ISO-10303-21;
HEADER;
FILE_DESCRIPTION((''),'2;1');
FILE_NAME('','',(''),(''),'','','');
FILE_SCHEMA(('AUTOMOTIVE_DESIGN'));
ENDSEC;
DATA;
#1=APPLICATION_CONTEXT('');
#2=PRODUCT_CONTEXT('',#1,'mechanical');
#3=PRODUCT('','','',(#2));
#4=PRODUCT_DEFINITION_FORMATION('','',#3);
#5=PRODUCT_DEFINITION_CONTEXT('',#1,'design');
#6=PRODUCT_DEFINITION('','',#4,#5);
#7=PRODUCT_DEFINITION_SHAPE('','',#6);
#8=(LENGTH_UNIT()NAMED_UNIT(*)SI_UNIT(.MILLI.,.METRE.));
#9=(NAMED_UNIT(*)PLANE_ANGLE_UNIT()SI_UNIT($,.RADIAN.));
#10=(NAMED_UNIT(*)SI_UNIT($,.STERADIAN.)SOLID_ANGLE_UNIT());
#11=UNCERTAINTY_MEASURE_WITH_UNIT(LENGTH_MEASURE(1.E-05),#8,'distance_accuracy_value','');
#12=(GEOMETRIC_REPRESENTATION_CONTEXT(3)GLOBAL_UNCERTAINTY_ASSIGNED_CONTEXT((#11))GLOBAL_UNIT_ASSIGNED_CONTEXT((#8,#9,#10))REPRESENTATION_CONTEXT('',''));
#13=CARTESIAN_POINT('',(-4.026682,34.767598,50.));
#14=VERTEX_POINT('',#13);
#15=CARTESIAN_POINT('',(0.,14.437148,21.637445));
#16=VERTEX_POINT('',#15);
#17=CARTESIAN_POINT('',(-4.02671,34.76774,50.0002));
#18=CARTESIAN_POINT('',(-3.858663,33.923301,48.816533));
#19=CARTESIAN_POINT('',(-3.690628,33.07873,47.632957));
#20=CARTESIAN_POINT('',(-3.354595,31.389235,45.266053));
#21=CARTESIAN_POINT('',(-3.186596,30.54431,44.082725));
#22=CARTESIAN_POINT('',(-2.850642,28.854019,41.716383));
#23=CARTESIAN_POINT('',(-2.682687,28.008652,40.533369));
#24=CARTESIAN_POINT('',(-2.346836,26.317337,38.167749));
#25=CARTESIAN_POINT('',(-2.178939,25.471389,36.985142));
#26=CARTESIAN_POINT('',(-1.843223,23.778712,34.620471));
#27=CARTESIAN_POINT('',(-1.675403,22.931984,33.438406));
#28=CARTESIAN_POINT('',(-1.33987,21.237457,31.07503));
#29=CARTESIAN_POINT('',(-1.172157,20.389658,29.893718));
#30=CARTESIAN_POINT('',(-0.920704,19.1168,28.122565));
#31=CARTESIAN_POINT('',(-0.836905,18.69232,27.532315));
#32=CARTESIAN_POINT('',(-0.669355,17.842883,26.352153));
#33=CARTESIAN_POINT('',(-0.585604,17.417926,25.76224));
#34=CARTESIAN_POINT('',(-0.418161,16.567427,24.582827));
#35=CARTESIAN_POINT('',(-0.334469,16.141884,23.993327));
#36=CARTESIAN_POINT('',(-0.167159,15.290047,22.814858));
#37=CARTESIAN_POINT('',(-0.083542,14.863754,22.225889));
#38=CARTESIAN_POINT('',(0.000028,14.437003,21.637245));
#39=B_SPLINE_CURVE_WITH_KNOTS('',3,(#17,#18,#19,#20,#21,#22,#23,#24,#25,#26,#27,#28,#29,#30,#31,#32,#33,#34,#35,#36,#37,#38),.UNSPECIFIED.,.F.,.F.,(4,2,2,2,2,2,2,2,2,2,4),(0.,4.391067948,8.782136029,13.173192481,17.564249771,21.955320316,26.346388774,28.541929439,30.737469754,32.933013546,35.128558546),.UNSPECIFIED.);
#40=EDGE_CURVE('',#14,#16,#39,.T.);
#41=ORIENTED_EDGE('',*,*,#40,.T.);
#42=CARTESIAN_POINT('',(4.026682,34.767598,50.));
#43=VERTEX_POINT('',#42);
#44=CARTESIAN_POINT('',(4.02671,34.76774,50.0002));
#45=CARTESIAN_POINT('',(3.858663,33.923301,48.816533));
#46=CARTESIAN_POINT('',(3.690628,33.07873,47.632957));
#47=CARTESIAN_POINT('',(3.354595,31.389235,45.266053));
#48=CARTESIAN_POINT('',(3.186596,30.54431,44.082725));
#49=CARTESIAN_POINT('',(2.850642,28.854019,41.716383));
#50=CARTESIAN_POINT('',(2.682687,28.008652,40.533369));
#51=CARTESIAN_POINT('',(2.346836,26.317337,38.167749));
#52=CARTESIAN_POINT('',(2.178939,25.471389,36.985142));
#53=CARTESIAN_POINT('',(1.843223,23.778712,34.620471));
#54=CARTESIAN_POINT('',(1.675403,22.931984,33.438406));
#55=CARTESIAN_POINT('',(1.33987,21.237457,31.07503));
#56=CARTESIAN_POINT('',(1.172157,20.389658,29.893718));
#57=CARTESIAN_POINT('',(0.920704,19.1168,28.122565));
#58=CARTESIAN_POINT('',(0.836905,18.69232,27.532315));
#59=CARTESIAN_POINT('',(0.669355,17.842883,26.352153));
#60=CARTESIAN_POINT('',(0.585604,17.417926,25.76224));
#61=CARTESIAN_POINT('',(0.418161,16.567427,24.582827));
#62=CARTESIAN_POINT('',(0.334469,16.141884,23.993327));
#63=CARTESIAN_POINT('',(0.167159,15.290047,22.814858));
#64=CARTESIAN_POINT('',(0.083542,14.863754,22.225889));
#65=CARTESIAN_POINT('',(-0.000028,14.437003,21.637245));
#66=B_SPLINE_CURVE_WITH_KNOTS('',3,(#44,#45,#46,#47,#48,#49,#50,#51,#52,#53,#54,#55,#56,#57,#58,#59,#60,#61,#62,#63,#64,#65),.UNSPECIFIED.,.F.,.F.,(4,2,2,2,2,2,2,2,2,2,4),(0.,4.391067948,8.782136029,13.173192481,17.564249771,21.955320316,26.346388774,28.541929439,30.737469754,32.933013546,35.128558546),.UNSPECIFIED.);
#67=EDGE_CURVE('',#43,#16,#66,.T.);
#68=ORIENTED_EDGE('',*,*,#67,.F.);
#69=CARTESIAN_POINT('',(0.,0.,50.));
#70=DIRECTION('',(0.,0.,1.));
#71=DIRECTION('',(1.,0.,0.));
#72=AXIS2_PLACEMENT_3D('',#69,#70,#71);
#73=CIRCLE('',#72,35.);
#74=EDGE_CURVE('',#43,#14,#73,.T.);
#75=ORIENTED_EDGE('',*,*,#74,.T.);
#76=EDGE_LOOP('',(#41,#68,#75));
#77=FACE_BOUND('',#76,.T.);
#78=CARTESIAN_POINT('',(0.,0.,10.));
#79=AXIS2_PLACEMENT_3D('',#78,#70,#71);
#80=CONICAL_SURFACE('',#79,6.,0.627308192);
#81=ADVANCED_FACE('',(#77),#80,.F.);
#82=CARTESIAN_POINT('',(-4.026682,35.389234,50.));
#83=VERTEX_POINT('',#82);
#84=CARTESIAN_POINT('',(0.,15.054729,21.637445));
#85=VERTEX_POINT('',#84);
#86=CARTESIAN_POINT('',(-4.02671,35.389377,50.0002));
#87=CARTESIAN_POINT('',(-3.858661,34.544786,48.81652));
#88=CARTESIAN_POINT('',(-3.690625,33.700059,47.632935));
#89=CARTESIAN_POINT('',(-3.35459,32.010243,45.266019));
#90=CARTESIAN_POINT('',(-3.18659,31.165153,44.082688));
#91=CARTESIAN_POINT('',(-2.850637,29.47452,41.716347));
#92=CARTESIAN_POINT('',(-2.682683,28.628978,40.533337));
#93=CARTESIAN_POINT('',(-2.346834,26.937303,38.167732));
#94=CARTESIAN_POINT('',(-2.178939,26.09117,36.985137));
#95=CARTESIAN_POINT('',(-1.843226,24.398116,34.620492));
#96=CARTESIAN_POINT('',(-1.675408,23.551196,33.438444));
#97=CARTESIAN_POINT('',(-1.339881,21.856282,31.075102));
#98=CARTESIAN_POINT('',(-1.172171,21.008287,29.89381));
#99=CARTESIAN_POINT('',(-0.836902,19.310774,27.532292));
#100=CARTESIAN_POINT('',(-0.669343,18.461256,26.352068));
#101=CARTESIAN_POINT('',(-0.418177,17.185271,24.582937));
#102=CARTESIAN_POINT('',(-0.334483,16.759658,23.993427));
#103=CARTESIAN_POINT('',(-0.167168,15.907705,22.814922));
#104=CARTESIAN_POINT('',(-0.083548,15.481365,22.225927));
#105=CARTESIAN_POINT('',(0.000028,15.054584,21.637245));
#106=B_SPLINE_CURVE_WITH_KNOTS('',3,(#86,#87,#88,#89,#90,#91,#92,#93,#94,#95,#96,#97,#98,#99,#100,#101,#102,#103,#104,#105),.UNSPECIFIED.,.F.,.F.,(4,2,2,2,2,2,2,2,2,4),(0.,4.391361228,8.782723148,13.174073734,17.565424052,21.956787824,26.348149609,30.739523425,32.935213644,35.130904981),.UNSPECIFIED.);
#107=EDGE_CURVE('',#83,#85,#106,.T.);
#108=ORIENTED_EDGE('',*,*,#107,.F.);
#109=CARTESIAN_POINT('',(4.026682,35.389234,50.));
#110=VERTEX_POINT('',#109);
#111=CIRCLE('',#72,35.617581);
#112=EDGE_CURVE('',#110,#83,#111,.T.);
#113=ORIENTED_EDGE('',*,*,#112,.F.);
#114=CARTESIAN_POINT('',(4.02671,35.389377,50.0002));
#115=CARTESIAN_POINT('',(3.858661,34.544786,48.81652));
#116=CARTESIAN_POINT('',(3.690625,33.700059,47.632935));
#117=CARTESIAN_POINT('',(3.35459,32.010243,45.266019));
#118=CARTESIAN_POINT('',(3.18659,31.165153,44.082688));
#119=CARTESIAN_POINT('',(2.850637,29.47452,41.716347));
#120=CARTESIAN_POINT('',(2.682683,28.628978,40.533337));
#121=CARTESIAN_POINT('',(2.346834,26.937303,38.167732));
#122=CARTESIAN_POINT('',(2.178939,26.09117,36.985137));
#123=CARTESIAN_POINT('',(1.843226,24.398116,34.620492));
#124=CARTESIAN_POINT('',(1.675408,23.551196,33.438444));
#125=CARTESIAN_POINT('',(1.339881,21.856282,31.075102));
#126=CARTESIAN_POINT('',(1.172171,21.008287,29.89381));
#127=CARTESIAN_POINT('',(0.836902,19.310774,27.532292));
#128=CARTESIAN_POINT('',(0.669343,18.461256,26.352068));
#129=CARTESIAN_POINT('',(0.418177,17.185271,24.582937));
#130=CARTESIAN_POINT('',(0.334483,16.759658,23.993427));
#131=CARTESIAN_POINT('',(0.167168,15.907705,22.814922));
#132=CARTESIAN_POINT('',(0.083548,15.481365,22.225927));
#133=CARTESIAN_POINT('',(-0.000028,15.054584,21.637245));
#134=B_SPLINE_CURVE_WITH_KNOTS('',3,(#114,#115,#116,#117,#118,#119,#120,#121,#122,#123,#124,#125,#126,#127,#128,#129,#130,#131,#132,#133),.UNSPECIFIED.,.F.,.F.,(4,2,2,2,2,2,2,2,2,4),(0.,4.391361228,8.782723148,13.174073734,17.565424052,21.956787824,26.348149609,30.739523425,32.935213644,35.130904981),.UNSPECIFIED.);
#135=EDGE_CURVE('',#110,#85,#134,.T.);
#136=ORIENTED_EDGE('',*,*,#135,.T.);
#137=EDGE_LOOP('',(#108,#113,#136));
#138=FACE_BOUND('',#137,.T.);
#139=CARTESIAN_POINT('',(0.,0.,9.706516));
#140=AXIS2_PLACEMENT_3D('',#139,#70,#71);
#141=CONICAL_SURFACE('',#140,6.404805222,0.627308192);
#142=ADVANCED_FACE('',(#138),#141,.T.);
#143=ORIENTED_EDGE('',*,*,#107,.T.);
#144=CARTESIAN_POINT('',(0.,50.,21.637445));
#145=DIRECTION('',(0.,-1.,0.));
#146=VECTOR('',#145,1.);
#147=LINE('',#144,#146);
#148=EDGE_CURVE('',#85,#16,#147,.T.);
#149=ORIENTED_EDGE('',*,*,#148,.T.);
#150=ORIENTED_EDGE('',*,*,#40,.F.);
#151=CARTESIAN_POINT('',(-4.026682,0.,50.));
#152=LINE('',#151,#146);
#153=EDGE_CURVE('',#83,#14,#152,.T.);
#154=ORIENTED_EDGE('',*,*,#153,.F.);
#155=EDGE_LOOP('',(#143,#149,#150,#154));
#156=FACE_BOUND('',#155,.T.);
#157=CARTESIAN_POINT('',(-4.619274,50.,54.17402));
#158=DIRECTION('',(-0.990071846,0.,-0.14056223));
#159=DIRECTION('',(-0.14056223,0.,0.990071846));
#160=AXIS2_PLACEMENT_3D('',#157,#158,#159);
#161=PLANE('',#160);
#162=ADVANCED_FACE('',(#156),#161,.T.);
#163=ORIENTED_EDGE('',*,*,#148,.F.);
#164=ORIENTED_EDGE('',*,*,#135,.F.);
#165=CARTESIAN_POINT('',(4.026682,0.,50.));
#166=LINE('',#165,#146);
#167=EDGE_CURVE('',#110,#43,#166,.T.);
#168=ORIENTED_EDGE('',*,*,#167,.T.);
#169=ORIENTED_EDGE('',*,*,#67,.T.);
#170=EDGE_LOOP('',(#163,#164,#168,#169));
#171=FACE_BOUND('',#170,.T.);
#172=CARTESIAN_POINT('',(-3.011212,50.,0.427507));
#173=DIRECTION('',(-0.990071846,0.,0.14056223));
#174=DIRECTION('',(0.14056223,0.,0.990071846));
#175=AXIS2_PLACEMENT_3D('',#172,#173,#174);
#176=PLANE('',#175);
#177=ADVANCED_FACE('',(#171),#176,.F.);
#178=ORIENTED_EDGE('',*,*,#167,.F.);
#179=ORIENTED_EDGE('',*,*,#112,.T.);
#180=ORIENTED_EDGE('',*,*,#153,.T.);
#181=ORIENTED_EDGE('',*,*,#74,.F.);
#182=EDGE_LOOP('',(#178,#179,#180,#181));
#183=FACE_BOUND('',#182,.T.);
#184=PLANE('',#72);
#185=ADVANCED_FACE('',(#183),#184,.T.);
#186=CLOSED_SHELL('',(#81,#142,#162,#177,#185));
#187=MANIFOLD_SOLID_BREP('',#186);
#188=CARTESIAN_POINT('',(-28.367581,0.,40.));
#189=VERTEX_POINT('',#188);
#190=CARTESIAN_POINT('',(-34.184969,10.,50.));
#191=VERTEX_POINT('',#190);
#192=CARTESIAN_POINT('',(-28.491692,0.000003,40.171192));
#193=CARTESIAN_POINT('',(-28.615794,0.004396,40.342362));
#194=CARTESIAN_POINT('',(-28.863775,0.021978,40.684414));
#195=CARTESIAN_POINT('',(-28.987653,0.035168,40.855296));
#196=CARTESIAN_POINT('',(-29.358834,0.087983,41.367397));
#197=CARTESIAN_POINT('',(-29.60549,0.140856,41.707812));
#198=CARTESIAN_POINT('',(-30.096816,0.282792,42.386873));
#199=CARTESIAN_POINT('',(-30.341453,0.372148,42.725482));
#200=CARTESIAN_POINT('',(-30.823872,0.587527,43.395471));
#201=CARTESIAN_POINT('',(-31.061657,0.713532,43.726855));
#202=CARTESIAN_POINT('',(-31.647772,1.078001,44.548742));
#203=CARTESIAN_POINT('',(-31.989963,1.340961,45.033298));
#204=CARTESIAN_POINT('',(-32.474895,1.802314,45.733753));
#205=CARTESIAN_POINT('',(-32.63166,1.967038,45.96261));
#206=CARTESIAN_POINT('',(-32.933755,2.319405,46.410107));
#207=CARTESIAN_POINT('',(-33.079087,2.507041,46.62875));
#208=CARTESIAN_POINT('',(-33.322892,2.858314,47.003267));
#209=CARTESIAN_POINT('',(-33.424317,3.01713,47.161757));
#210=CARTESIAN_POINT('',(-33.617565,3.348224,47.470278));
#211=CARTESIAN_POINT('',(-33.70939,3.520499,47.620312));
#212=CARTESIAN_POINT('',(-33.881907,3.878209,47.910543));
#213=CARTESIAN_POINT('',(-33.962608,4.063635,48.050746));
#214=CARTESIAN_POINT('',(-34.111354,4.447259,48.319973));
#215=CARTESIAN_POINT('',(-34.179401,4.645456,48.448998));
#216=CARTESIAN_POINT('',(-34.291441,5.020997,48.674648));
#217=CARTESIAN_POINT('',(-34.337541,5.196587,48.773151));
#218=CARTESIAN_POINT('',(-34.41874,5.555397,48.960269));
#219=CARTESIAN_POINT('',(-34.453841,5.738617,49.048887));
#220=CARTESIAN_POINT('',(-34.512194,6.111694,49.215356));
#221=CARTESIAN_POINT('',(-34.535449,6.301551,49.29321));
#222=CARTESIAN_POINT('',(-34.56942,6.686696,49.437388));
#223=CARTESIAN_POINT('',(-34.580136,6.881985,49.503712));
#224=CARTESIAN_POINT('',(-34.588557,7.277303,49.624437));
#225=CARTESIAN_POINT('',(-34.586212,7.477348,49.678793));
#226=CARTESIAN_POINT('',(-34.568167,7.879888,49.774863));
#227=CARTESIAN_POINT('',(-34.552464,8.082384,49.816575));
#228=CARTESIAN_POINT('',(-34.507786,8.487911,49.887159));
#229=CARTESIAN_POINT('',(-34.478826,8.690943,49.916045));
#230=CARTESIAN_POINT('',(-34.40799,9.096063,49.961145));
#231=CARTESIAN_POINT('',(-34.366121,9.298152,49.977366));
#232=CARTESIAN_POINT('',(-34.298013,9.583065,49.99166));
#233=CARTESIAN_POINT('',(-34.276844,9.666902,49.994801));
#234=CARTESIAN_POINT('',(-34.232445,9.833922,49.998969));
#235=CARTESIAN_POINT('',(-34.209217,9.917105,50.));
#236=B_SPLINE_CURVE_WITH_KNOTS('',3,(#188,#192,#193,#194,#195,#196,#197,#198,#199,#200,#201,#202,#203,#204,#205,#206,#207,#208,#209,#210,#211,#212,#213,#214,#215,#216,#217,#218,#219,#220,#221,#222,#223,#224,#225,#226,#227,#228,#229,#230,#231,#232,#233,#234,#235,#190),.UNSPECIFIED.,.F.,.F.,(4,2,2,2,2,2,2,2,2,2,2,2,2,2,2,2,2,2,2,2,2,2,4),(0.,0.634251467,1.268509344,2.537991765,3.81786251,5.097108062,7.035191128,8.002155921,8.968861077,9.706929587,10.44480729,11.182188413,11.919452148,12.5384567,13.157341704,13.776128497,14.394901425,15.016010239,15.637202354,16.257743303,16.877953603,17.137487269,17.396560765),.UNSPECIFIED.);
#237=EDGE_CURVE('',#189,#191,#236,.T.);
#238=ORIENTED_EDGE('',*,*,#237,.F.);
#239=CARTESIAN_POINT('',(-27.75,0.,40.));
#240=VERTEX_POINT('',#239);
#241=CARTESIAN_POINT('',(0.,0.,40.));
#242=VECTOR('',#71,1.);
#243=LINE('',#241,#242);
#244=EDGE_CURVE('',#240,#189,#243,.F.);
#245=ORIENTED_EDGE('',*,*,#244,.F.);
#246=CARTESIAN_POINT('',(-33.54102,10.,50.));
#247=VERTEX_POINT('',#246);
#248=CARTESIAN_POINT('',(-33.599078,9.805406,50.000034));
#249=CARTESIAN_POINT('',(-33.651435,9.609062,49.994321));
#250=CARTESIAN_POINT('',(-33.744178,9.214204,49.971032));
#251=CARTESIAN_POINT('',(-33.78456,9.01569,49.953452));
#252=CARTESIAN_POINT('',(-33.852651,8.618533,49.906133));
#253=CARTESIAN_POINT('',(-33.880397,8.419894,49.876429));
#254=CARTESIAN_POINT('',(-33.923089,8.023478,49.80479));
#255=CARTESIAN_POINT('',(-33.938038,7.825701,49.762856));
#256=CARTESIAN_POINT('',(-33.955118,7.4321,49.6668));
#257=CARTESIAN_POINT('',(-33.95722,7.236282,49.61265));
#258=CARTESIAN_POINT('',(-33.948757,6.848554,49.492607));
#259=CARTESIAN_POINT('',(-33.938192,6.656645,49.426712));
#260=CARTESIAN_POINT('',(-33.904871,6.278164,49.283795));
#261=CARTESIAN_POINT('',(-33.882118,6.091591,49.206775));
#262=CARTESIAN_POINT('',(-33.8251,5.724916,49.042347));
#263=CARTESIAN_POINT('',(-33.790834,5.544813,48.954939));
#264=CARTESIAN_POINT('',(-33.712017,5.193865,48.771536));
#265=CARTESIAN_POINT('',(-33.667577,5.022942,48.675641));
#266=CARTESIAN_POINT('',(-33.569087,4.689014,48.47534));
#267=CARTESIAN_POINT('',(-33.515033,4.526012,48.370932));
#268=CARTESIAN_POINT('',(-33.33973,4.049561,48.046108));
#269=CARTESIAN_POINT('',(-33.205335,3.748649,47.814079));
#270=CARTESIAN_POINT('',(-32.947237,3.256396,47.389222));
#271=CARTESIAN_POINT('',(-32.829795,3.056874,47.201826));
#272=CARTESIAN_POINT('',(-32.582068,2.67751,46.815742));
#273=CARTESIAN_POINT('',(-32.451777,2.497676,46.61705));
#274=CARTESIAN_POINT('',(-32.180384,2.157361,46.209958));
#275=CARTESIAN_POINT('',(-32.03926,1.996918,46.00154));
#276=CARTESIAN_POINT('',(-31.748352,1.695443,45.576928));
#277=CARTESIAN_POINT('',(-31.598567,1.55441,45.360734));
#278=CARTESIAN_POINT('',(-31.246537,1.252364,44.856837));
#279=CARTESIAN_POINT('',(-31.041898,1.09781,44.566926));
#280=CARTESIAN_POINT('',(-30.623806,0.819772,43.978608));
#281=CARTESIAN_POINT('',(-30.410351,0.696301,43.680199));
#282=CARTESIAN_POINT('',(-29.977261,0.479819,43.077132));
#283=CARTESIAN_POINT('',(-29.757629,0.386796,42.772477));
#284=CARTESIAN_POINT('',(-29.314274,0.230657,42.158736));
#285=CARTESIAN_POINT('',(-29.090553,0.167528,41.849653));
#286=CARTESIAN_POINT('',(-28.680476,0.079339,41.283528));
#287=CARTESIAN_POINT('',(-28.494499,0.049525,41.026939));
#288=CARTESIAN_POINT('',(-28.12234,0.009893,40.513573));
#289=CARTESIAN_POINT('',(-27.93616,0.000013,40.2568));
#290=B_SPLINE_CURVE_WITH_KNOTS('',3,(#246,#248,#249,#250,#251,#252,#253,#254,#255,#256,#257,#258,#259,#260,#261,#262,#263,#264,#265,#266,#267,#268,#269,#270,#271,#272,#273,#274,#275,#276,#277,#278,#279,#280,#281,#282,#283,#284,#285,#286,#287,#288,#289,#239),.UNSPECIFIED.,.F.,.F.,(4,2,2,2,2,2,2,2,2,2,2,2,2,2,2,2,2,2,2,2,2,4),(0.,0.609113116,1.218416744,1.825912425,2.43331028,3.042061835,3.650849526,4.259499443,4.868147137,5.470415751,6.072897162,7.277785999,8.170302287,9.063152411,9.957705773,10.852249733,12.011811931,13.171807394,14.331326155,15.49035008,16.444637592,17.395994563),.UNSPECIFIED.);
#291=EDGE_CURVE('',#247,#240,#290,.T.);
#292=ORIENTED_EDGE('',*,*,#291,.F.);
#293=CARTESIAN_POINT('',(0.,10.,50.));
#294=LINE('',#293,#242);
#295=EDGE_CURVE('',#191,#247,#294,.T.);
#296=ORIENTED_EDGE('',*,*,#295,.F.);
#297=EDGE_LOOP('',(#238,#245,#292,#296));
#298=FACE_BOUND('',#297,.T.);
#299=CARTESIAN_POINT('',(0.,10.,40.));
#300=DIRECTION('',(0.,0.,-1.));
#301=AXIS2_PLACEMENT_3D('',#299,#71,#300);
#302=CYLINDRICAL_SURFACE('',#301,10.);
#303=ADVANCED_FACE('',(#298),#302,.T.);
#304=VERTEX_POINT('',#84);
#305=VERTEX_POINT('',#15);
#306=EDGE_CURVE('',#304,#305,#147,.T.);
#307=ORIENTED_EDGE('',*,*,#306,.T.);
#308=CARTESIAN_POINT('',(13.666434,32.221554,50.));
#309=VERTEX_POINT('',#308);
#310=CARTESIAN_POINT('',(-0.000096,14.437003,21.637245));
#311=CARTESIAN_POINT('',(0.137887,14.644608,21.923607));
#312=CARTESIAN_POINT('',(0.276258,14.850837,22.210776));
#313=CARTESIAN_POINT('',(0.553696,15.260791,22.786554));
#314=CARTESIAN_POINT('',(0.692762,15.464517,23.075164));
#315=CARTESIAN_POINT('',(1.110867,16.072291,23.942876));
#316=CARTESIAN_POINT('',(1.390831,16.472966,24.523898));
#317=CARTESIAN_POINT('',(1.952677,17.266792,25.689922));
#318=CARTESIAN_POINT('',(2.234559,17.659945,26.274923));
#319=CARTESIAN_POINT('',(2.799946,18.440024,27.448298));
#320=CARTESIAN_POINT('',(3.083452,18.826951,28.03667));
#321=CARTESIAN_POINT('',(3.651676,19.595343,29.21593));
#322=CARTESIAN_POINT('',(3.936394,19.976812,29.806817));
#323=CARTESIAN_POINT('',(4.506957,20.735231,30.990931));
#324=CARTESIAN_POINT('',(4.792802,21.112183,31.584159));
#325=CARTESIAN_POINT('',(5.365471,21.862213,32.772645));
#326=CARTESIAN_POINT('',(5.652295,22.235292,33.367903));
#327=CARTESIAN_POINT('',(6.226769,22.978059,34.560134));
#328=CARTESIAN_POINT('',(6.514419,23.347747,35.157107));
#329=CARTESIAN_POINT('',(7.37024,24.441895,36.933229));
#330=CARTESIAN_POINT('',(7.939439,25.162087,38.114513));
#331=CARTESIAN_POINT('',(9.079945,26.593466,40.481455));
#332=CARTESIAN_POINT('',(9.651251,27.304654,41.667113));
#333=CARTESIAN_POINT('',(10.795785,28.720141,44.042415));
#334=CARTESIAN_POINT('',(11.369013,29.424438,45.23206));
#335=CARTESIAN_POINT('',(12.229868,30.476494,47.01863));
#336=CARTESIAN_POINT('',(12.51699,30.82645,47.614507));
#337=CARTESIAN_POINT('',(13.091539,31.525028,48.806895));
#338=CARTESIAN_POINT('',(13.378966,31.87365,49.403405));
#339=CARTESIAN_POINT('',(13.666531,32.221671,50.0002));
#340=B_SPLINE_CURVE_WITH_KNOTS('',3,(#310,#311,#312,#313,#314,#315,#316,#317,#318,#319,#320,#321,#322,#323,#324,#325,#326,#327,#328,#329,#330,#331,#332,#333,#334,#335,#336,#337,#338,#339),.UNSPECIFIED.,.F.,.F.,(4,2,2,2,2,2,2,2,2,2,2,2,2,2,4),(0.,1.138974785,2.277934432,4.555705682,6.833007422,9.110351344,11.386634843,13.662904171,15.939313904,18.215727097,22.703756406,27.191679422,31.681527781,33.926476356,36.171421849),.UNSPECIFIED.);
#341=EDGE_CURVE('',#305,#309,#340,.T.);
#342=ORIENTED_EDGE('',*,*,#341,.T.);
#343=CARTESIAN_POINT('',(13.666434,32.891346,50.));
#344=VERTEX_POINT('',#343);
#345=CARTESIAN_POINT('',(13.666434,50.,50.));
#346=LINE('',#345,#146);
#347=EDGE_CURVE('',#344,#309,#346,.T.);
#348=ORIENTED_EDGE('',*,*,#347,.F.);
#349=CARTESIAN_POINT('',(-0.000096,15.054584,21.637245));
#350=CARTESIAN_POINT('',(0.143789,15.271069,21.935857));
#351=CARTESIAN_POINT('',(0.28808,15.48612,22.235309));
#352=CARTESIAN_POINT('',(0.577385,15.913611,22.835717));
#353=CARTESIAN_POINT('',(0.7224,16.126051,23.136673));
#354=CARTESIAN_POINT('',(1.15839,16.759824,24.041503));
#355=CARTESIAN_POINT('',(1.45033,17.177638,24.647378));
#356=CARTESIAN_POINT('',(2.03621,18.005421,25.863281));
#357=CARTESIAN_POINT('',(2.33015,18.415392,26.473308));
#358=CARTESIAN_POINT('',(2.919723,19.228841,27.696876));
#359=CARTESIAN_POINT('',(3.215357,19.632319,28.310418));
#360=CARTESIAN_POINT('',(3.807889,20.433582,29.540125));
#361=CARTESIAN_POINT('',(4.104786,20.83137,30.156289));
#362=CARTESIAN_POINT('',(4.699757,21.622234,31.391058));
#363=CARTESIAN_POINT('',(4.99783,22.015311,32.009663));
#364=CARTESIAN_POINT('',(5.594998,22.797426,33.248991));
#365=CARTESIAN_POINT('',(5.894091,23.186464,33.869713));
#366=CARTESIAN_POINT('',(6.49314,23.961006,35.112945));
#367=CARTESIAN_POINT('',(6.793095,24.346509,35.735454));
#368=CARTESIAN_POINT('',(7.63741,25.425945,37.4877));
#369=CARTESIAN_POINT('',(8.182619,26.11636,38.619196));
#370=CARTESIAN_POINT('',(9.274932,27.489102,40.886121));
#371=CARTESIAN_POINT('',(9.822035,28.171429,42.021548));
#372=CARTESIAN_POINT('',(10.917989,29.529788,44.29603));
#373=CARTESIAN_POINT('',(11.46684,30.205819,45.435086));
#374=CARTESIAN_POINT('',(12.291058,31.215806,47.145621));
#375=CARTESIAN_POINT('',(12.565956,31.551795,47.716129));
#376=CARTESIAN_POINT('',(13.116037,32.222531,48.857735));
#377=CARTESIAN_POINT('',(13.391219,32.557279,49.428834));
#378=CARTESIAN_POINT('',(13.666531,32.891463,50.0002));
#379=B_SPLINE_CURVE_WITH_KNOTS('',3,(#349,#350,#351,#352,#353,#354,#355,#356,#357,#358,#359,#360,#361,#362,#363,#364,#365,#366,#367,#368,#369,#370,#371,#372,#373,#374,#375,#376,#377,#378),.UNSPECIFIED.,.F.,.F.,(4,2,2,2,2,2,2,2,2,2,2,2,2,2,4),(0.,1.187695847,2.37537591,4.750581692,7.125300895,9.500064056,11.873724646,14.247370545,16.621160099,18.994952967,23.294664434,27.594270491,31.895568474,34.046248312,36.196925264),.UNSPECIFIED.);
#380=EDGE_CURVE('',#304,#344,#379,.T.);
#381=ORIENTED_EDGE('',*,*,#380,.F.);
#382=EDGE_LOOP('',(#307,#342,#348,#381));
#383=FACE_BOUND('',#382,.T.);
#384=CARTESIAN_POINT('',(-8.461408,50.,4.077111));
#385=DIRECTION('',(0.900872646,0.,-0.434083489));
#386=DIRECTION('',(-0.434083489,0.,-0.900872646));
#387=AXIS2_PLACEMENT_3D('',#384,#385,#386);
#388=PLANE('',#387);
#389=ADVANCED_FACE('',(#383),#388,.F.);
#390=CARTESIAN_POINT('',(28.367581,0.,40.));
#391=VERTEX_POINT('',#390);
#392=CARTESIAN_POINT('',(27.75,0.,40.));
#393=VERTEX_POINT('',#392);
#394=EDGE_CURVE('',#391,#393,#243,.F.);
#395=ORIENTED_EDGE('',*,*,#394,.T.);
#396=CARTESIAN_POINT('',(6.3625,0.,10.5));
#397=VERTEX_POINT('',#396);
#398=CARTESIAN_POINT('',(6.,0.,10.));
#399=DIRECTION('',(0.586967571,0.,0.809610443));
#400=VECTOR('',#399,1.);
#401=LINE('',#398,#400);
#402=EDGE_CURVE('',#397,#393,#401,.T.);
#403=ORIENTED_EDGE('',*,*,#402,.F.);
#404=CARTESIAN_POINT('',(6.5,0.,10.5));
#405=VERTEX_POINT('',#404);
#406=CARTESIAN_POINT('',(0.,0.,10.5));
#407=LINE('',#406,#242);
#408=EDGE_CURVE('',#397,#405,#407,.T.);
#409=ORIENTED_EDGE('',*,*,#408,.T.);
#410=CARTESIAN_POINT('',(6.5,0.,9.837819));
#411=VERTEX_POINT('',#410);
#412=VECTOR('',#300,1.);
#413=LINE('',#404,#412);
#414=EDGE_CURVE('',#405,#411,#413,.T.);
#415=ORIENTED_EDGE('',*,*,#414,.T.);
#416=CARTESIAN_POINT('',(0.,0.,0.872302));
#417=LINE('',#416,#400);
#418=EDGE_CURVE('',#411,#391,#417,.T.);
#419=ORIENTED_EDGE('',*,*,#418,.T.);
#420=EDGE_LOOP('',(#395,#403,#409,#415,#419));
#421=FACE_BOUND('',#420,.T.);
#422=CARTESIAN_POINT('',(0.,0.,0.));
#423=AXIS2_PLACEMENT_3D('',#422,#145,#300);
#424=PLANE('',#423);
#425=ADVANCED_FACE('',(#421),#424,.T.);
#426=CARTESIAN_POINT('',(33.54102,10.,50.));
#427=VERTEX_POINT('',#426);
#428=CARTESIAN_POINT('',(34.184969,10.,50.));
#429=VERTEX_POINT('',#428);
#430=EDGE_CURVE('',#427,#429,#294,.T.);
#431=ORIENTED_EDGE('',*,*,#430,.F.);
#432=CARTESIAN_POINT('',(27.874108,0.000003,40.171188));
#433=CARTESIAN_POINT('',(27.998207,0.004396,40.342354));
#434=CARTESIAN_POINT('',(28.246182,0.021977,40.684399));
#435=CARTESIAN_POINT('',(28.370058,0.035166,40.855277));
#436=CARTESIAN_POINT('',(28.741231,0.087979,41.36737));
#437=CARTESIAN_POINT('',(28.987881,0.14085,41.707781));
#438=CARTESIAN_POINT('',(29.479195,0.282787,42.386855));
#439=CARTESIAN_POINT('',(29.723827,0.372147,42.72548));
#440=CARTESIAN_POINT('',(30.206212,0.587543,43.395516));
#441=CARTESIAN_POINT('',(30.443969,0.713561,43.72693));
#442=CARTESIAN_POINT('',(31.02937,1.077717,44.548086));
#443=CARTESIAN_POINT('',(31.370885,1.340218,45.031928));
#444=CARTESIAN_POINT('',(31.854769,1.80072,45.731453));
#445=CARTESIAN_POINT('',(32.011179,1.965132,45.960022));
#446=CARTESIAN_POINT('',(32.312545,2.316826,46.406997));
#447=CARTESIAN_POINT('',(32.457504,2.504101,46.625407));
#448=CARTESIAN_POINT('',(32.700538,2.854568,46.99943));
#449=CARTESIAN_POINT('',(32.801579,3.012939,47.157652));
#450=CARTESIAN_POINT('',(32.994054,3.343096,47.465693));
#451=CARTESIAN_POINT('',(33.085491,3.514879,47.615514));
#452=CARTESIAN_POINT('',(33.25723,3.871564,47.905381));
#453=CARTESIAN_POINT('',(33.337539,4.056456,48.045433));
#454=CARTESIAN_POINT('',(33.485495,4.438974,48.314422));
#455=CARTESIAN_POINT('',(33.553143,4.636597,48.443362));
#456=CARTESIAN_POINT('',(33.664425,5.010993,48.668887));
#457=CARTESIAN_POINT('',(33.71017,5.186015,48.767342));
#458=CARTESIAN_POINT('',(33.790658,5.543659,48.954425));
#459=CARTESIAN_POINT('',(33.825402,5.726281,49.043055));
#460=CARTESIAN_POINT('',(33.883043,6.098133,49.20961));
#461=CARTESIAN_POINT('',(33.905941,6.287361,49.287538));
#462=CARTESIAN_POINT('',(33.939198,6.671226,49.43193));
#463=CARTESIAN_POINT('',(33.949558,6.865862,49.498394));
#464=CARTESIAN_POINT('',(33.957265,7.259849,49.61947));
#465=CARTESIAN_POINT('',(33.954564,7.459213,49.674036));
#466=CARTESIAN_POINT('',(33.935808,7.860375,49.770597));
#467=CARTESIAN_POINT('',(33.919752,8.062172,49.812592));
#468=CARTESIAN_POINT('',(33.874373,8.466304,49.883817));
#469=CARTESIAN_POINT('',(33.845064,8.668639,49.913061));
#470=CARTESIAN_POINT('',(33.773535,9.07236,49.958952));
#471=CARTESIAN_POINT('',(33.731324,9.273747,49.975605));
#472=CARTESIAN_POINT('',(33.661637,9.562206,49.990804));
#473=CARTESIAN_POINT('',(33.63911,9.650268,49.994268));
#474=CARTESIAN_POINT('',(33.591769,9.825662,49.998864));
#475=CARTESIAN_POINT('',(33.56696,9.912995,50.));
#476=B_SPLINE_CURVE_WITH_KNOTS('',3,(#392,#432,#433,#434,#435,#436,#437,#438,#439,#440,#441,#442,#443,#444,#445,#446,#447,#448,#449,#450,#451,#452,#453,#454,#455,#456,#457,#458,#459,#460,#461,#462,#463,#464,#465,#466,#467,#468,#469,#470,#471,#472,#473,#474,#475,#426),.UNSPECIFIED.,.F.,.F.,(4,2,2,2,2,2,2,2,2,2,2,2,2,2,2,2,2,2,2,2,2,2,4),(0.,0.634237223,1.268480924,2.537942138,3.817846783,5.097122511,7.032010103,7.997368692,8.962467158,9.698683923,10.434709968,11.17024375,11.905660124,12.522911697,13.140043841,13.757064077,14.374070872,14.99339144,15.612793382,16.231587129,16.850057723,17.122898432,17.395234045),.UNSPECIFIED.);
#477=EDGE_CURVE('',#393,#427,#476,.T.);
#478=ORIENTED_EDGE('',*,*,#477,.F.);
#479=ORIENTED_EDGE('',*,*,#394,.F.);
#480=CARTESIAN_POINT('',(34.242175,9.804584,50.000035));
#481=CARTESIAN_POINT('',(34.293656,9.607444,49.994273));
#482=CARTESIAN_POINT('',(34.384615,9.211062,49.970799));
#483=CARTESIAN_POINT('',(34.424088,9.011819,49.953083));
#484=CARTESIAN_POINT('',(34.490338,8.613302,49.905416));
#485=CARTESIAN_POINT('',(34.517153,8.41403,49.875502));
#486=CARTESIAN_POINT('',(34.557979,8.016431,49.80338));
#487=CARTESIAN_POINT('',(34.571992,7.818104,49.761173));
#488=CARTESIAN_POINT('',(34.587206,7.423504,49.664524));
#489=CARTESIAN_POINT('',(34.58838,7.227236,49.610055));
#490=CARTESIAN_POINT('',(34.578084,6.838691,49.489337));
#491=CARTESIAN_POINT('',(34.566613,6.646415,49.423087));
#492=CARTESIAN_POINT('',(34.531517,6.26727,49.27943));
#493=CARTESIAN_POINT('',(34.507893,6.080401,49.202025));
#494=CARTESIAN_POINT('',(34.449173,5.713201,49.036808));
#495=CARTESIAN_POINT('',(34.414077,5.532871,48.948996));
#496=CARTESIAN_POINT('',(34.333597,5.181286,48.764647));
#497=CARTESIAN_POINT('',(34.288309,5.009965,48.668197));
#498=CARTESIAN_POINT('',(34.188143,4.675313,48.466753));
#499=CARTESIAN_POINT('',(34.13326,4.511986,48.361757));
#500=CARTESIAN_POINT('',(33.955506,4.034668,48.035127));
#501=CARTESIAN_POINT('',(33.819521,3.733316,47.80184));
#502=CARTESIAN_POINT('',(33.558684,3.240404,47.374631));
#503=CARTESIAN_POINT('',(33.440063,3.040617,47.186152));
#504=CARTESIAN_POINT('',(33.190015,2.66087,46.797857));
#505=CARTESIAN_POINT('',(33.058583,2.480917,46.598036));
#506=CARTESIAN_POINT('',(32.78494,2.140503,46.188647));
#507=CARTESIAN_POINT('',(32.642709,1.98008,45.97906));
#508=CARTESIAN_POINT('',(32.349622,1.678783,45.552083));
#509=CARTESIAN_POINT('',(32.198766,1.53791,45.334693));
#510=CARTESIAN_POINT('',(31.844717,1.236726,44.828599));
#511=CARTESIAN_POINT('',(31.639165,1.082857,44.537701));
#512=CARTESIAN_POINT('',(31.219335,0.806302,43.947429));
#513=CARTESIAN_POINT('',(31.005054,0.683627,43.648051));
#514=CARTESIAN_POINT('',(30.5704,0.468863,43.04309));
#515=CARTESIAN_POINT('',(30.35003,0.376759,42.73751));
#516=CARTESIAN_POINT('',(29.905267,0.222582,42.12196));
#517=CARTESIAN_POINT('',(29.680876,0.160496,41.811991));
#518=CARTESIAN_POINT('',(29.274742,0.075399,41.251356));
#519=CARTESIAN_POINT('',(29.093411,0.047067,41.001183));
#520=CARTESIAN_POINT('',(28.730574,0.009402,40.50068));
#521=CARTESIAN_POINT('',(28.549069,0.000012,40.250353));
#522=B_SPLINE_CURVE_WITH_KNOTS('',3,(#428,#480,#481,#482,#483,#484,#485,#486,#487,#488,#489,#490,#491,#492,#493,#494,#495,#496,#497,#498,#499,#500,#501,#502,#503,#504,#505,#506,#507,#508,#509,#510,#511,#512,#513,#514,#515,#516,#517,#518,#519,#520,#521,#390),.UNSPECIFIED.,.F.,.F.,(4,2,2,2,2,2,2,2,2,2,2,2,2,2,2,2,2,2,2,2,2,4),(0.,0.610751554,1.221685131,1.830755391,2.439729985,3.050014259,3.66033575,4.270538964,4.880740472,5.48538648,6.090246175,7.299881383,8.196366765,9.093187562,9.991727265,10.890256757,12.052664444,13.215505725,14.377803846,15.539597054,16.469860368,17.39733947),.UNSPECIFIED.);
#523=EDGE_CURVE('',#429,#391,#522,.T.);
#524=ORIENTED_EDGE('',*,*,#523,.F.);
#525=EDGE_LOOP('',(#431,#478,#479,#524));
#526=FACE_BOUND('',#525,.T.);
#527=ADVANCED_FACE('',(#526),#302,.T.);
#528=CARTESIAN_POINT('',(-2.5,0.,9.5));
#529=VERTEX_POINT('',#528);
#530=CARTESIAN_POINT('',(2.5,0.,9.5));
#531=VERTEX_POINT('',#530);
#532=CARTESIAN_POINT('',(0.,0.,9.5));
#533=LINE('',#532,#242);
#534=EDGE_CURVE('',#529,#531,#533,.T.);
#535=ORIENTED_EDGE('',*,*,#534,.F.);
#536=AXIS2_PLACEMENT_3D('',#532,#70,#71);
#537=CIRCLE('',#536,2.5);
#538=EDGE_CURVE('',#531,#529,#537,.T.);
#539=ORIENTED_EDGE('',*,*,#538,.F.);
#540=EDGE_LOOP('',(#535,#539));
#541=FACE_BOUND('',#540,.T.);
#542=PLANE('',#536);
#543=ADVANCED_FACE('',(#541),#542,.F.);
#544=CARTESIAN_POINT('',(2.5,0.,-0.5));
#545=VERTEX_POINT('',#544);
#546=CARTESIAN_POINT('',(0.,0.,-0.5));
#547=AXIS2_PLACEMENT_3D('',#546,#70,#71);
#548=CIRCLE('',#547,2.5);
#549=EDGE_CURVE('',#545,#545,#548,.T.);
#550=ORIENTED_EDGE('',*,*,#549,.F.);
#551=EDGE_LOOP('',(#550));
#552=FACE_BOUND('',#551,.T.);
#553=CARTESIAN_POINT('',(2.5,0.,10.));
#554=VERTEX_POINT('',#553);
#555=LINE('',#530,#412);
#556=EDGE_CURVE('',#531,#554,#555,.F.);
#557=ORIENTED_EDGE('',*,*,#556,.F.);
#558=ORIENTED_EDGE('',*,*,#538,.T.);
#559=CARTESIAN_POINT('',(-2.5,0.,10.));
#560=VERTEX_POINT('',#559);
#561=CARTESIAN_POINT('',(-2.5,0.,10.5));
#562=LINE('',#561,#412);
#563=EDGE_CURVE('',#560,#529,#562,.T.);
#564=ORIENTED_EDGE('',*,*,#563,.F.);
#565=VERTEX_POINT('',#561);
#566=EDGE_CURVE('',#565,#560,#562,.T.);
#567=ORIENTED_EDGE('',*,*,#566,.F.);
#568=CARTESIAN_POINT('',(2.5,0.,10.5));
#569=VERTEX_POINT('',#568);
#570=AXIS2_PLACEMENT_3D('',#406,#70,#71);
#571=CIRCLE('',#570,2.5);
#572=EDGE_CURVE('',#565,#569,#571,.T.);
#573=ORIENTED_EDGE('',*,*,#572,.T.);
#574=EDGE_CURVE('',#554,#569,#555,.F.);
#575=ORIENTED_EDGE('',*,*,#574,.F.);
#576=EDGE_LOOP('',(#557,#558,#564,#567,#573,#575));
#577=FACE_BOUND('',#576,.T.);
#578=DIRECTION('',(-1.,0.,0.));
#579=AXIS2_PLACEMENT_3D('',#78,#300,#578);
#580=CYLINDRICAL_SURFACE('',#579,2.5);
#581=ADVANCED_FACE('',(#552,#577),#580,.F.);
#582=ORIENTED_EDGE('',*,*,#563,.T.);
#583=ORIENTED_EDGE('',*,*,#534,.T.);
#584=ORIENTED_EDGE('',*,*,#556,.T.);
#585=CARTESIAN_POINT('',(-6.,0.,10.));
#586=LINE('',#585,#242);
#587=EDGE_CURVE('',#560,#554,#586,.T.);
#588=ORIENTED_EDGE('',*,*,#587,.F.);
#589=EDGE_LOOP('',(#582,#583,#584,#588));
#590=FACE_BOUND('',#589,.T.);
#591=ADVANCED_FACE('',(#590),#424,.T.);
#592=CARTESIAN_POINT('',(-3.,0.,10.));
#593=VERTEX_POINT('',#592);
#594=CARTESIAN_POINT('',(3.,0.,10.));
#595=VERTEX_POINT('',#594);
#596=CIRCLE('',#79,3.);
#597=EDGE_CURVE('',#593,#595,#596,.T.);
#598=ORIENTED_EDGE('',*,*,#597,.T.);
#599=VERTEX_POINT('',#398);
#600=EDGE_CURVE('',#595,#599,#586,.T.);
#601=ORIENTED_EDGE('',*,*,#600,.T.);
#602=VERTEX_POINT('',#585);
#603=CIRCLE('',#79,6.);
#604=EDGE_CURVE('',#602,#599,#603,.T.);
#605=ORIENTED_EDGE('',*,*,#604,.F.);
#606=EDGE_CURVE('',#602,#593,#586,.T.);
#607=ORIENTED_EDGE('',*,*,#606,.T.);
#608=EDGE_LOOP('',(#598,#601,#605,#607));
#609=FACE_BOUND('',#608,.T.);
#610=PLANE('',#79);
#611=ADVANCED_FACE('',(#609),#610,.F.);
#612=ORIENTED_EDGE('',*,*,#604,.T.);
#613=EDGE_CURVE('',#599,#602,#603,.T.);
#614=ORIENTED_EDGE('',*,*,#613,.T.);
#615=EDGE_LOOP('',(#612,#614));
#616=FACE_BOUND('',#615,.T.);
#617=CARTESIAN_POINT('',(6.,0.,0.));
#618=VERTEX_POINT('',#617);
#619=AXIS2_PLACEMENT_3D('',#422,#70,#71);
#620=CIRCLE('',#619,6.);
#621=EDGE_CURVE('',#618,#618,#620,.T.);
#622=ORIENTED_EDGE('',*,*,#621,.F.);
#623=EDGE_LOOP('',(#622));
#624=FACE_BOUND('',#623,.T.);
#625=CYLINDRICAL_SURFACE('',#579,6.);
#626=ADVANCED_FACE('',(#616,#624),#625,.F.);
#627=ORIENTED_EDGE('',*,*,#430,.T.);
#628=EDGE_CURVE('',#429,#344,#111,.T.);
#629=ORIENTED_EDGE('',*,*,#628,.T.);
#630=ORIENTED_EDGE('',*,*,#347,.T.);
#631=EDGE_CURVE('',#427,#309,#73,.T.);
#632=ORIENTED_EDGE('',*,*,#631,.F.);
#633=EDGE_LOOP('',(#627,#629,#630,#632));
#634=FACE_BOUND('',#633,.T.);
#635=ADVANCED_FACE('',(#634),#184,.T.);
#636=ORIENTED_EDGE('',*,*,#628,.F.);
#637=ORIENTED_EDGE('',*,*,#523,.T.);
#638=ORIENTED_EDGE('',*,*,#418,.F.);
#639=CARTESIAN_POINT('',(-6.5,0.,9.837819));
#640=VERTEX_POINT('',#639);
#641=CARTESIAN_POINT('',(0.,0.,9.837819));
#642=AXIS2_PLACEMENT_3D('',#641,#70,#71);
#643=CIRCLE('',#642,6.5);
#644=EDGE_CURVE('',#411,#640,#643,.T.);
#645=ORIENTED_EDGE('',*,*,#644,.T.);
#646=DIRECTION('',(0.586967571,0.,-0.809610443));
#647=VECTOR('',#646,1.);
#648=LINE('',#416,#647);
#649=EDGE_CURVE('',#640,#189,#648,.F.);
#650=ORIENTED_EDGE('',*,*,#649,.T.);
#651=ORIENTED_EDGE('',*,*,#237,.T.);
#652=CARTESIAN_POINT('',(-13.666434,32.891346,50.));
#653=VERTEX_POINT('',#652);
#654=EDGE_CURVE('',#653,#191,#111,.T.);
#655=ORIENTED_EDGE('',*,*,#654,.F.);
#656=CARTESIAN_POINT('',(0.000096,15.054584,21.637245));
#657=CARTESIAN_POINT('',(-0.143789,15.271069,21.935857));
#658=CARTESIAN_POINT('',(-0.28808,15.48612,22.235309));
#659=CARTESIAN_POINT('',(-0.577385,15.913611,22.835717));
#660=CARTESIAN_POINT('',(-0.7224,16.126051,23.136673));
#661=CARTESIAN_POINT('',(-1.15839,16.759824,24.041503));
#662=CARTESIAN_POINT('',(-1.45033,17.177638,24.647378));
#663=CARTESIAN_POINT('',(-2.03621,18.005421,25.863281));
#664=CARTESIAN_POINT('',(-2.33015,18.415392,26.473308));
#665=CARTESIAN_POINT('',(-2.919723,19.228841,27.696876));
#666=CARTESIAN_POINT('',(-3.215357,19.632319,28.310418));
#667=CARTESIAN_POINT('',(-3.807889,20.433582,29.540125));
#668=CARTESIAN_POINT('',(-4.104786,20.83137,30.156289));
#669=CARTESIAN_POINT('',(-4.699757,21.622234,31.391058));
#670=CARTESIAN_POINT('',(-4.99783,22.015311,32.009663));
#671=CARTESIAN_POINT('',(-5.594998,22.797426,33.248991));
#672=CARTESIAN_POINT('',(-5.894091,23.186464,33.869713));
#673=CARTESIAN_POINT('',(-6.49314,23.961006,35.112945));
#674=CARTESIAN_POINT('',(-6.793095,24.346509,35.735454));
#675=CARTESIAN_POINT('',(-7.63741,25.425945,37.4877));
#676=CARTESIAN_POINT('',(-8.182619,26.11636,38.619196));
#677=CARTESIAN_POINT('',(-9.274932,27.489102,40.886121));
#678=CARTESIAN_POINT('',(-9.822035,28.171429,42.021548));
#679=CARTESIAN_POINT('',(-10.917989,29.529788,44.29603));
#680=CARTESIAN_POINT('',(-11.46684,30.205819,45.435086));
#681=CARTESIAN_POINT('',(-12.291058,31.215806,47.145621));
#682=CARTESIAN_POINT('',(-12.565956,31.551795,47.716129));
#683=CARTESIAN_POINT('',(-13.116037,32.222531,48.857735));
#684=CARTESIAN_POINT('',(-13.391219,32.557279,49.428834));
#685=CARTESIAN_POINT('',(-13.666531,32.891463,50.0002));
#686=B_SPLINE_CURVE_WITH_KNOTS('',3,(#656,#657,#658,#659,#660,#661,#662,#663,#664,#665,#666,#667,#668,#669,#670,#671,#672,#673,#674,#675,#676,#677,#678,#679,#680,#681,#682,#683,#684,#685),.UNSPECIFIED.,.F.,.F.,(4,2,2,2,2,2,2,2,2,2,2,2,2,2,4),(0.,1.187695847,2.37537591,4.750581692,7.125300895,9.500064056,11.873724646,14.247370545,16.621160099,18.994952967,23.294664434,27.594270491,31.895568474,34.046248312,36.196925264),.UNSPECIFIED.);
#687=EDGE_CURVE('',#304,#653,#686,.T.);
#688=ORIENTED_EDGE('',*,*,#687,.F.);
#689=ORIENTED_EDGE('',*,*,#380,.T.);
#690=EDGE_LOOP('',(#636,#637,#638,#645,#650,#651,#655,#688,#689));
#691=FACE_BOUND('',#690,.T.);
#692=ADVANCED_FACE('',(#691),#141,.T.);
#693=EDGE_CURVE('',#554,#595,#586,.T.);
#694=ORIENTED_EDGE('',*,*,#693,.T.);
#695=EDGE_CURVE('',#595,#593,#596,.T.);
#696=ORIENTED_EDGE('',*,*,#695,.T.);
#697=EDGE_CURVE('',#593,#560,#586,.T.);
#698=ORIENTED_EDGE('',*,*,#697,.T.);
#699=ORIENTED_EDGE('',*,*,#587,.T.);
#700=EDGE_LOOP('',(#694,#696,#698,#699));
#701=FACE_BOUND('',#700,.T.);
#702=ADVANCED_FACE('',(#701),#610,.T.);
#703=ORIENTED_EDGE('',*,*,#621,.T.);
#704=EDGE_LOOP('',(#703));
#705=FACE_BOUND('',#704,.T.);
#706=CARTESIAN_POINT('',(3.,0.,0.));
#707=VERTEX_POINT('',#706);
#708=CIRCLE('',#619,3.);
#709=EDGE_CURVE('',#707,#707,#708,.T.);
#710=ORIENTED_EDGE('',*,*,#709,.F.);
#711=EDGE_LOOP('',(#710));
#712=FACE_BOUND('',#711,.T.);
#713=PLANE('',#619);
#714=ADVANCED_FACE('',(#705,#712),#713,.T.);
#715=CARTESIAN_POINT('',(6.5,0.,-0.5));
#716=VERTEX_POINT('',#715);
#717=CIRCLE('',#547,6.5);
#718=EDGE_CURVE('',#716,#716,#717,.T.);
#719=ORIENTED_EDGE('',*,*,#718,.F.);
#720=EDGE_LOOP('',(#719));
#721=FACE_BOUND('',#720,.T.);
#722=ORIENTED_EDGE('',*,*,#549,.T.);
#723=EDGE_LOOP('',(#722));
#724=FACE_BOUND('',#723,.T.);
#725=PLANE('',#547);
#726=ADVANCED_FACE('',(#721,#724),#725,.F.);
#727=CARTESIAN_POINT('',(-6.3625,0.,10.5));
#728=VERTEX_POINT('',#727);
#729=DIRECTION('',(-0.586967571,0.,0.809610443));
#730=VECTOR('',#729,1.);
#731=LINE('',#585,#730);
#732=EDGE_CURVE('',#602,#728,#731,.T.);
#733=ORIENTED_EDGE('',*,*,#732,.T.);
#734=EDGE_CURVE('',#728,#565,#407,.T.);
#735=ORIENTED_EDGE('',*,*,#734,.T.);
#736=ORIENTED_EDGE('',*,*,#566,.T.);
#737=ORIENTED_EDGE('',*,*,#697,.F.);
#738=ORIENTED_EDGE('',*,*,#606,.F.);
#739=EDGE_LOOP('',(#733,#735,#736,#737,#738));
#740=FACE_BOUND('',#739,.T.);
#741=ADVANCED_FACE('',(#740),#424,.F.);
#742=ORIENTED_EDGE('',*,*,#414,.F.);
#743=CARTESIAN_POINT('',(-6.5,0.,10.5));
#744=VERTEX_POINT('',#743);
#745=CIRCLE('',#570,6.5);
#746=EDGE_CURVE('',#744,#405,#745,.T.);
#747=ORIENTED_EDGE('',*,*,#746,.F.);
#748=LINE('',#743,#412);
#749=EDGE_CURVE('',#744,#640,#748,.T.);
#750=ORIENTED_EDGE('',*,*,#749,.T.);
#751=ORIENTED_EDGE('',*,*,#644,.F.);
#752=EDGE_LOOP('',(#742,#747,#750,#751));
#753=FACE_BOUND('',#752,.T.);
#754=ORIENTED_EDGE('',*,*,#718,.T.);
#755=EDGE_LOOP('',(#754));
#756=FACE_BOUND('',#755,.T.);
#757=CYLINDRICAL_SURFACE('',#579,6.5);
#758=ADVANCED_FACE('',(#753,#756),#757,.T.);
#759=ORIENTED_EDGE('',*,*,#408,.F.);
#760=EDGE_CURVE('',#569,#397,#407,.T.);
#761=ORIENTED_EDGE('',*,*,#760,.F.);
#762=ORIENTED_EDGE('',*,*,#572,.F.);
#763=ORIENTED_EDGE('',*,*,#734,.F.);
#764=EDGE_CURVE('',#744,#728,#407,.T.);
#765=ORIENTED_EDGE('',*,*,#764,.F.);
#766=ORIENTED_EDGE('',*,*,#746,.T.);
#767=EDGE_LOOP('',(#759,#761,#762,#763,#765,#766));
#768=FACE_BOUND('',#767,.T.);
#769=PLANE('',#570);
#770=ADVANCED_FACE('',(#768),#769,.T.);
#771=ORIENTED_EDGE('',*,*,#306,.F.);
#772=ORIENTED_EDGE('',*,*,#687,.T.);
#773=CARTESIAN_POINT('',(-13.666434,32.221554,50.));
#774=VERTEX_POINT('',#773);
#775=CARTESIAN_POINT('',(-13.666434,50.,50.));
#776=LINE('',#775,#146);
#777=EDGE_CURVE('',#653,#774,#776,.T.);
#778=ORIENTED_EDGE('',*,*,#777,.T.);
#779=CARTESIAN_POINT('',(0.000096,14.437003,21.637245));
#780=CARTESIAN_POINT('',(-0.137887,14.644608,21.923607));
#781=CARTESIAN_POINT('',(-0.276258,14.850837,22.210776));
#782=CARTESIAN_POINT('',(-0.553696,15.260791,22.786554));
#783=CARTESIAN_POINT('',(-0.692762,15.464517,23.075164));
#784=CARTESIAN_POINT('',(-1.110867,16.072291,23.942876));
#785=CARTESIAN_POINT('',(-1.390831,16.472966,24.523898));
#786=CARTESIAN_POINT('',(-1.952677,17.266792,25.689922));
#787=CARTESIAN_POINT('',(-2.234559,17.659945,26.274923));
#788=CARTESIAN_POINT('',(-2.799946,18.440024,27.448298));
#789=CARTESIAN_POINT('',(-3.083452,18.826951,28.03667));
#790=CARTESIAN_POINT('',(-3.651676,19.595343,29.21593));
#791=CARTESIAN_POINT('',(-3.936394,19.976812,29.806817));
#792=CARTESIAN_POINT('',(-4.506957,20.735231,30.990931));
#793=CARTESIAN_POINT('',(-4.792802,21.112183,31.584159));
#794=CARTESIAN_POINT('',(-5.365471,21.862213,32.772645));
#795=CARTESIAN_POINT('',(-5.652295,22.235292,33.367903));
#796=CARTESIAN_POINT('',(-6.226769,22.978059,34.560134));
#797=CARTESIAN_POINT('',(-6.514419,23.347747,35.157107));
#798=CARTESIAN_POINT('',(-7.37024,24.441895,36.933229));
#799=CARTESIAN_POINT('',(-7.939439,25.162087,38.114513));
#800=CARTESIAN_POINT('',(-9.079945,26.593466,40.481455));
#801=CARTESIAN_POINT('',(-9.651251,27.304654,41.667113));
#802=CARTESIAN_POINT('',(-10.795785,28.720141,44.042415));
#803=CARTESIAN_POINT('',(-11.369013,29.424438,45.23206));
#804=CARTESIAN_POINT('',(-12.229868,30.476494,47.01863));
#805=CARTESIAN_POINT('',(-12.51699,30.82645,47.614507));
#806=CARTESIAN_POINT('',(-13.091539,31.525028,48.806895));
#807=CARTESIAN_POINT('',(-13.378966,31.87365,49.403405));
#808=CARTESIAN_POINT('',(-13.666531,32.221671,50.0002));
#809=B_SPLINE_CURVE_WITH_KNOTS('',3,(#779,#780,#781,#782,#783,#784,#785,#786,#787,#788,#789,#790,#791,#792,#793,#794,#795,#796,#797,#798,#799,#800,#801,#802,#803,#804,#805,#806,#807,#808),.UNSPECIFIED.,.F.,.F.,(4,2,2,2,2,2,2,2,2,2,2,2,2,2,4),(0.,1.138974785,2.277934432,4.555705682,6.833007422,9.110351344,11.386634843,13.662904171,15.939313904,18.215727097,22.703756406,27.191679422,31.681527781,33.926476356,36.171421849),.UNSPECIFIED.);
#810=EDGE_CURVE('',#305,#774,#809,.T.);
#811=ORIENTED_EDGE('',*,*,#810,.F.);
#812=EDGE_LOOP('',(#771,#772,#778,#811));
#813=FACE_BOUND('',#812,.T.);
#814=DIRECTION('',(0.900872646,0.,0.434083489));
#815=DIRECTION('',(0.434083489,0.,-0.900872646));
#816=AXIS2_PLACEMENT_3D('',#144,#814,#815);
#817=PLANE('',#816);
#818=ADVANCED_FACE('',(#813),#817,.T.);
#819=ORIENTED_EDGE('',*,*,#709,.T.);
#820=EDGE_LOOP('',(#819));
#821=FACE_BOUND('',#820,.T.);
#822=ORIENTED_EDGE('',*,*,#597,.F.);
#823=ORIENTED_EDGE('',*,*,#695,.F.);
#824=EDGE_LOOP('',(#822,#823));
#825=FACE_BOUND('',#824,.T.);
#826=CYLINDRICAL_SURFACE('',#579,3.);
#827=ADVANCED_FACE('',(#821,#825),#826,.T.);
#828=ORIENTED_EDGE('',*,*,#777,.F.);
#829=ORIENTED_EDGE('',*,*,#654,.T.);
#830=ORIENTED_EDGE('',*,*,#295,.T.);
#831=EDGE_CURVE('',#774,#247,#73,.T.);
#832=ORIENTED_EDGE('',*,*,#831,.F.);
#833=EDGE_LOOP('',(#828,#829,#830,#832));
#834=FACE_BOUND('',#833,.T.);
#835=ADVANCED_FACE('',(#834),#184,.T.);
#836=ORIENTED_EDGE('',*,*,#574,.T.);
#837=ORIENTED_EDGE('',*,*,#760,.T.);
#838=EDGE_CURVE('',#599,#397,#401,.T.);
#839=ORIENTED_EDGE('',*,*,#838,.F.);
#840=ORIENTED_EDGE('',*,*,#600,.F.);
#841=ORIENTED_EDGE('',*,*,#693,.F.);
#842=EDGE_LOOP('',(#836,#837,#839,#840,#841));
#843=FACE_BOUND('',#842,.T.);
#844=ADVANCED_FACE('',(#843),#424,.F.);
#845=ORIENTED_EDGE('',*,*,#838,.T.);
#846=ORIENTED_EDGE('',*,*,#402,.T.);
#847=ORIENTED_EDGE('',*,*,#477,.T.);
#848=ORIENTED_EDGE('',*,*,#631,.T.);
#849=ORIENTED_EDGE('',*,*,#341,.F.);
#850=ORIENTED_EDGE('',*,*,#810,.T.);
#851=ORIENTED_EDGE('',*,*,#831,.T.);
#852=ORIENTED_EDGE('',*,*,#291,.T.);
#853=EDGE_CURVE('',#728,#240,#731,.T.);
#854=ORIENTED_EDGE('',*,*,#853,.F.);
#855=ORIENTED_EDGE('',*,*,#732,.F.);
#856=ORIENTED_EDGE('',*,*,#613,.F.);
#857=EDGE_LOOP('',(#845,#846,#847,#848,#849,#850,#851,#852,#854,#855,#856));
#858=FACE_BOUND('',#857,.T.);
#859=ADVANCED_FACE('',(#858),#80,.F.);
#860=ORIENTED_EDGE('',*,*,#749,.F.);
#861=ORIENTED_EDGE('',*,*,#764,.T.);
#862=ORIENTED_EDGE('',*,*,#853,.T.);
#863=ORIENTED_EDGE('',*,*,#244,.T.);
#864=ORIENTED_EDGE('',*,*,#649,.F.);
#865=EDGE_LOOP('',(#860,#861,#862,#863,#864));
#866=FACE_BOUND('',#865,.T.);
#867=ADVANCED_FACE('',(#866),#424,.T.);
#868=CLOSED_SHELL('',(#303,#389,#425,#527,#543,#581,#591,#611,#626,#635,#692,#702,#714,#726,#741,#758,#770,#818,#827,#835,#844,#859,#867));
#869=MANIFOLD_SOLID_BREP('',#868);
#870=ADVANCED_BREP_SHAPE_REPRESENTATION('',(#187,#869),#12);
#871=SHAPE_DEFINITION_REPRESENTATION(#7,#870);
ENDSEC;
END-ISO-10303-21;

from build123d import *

# Parameters (mm, degrees)
SKETCH1_R            = 6
SKETCH1_R_2          = 3
BOSS_EXTRUDE1_DEPTH  = 10
SHELL1_START         = 10
SHELL1_DEPTH         = 40
SHELL1_2_OUTLINE_R   = 6
SHELL1_2_OUTLINE_R_2 = 3
SHELL1_2_DEPTH       = 10
SHELL1_START_2       = -0.5
SHELL1_3_OUTLINE_R   = 6.5
SHELL1_3_OUTLINE_R_2 = 6
SHELL1_3_OUTLINE_R_3 = 3
SHELL1_3_OUTLINE_R_4 = 2.5
SHELL1_3_DEPTH       = 10.5
SHELL1_4_OUTLINE_R   = 6
SHELL1_4_OUTLINE_R_2 = 3
SHELL1_4_DEPTH       = 0.5
SHELL1_5_DEPTH       = 0.5
SHELL1_START_3       = 9.5
SHELL1_6_DEPTH       = 0.5
SHELL1_8_ANGLE       = 180
SHELL1_9_ANGLE       = 180
FILLET1_R            = 10
CUT_EXTRUDE3_DEPTH   = 50


with BuildPart() as part:
    # Sketch1 → Boss-Extrude1 (new body)
    with BuildSketch(Plane.XY):
        Circle(SKETCH1_R)
        Circle(SKETCH1_R_2, mode=Mode.SUBTRACT)
    extrude(amount=BOSS_EXTRUDE1_DEPTH)

    # Sketch14 → Loft1 section 0
    with BuildSketch(Plane.XY.offset(10)):
        with BuildLine():
            Line((-6, 0), (6, 0))
            ThreePointArc((6, 0), (0, 6), (-6, 0))
        make_face()
    # Sketch13 → Loft1 section 1
    with BuildSketch(Plane.XY.offset(50)):
        with BuildLine():
            Line((-35, 0), (35, 0))
            ThreePointArc((35, 0), (0, 35), (-35, 0))
        make_face()
    loft()

    # Shell1: read off the stored shape, not the designer's step
    # Shell1 outline → Shell1 (cut)
    with BuildSketch(Plane.XY.offset(SHELL1_START)):
        with BuildLine():
            ThreePointArc((6, 0), (0, 6), (-6, 0))
            Line((-6, 0), (6, 0))
        make_face()
    extrude(amount=SHELL1_DEPTH, mode=Mode.SUBTRACT)

    # Shell1 2 outline → Shell1 2 (cut)
    with BuildSketch(Plane.XY):
        Circle(SHELL1_2_OUTLINE_R)
        Circle(SHELL1_2_OUTLINE_R_2, mode=Mode.SUBTRACT)
    extrude(amount=SHELL1_2_DEPTH, mode=Mode.SUBTRACT)

    # Shell1 3 outline → Shell1 3 (add)
    # profile 1 of 2: a face of its own
    with BuildSketch(Plane.XY.offset(SHELL1_START_2)):
        Circle(SHELL1_3_OUTLINE_R)
        Circle(SHELL1_3_OUTLINE_R_2, mode=Mode.SUBTRACT)
    # profile 2 of 2: a face of its own
    with BuildSketch(Plane.XY.offset(SHELL1_START_2)):
        Circle(SHELL1_3_OUTLINE_R_3)
        Circle(SHELL1_3_OUTLINE_R_4, mode=Mode.SUBTRACT)
    extrude(amount=SHELL1_3_DEPTH)

    # Shell1 4 outline → Shell1 4 (add)
    with BuildSketch(Plane.XY.offset(SHELL1_START_2)):
        Circle(SHELL1_4_OUTLINE_R)
        Circle(SHELL1_4_OUTLINE_R_2, mode=Mode.SUBTRACT)
    extrude(amount=SHELL1_4_DEPTH)

    # Shell1 5 outline → Shell1 5 (add)
    with BuildSketch(Plane.XY.offset(SHELL1_START)):
        with BuildLine():
            ThreePointArc((-6.5, 0), (0, -6.5), (6.5, 0))
            Line((6.5, 0), (2.5, 0))
            ThreePointArc((2.5, 0), (0, -2.5), (-2.5, 0))
            Line((-2.5, 0), (-6.5, 0))
        make_face()
    extrude(amount=SHELL1_5_DEPTH)

    # Shell1 6 outline → Shell1 6 (add)
    with BuildSketch(Plane.XY.offset(SHELL1_START_3)):
        with BuildLine():
            ThreePointArc((2.5, 0), (0, 2.5), (-2.5, 0))
            Line((-2.5, 0), (2.5, 0))
        make_face()
    extrude(amount=SHELL1_6_DEPTH)

    # Shell1 7 outline → Shell1 7 (revolve, cut)
    with BuildSketch(Plane.XZ):
        Polygon((35, 49.148164185), (35, 50), (6.5, 50), (6.5, 9.837819357), align=None)
    revolve(axis=Axis((0, 0, 0), (0, 0, 1)), mode=Mode.SUBTRACT)

    # Shell1 8 outline → Shell1 8 (revolve, cut)
    with BuildSketch(Plane.XZ):
        Polygon((6, 50), (6, 10), (6.5, 10.689655172), (6.5, 50), align=None)
    revolve(axis=Axis((0, 0, 0), (0, 0, 1)), revolution_arc=SHELL1_8_ANGLE, mode=Mode.SUBTRACT)

    # Shell1 9 outline → Shell1 9 (revolve)
    with BuildSketch(Plane.XZ):
        Polygon((35.617580966, 50), (35, 50), (6, 10), (6.5, 10), (6.5, 9.837819357), align=None)
    revolve(axis=Axis((0, 0, 0), (0, 0, 1)), revolution_arc=SHELL1_9_ANGLE)

    # Fillet1
    # the kernel refuses this fillet: 10 mm, written as the material it takes off along each edge
    with BuildSketch(Plane(origin=(-60.617580966, 0, 50), x_dir=(0, 1, 0), z_dir=(1, 0, 0))) as fillet1_piece_1:
        with BuildLine():
            CenterArc((FILLET1_R, -FILLET1_R), FILLET1_R, 90, 90)
            Line((0, -FILLET1_R), (-FILLET1_R * 0.02, -FILLET1_R))
            Line((-FILLET1_R * 0.02, -FILLET1_R), (-FILLET1_R * 0.02, FILLET1_R * 0.02))
            Line((-FILLET1_R * 0.02, FILLET1_R * 0.02), (FILLET1_R, FILLET1_R * 0.02))
            Line((FILLET1_R, FILLET1_R * 0.02), (FILLET1_R, 0))
        make_face()
    extrude(amount=50.617580966, mode=Mode.SUBTRACT)
    with BuildSketch(Plane(origin=(60.617580966, 0, 50), x_dir=(0, 1, 0), z_dir=(-1, 0, 0))) as fillet1_piece_2:
        with BuildLine():
            CenterArc((FILLET1_R, FILLET1_R), FILLET1_R, 180, 90)
            Line((0, FILLET1_R), (-FILLET1_R * 0.02, FILLET1_R))
            Line((-FILLET1_R * 0.02, FILLET1_R), (-FILLET1_R * 0.02, -FILLET1_R * 0.02))
            Line((-FILLET1_R * 0.02, -FILLET1_R * 0.02), (FILLET1_R, -FILLET1_R * 0.02))
            Line((FILLET1_R, -FILLET1_R * 0.02), (FILLET1_R, 0))
        make_face()
    extrude(amount=50.617580966, mode=Mode.SUBTRACT)

    # Sketch15 → Cut-Extrude3 (cut)
    with BuildSketch(Plane(origin=(0, 0, 0), x_dir=(1, 0, 0), z_dir=(0, 1, 0))):
        Polygon((0, -21.637444993), (13.666434313, -50), (13.666434313, -54.174020003), (4.619274425, -54.174020003), align=None)
        Polygon((-4.619274425, -54.174020003), (0, -21.637444993), (-13.666434313, -50), (-13.666434313, -54.174020003), align=None)
    extrude(amount=CUT_EXTRUDE3_DEPTH, mode=Mode.SUBTRACT)


with BuildPart() as cut_extrude3_piece_1:
    # of the separate pieces the step leaves, piece 1, a body of its own (cut_extrude3_pieces)
    add(part.part.solids().sort_by_distance((6, 0, 0))[0])


with BuildPart() as cut_extrude3_piece_2:
    # of the separate pieces the step leaves, piece 2, a body of its own (cut_extrude3_pieces)
    add(part.part.solids().sort_by_distance((4.02668151, 34.767597501, 50))[0])


solid = Compound([cut_extrude3_piece_1.part, cut_extrude3_piece_2.part])
